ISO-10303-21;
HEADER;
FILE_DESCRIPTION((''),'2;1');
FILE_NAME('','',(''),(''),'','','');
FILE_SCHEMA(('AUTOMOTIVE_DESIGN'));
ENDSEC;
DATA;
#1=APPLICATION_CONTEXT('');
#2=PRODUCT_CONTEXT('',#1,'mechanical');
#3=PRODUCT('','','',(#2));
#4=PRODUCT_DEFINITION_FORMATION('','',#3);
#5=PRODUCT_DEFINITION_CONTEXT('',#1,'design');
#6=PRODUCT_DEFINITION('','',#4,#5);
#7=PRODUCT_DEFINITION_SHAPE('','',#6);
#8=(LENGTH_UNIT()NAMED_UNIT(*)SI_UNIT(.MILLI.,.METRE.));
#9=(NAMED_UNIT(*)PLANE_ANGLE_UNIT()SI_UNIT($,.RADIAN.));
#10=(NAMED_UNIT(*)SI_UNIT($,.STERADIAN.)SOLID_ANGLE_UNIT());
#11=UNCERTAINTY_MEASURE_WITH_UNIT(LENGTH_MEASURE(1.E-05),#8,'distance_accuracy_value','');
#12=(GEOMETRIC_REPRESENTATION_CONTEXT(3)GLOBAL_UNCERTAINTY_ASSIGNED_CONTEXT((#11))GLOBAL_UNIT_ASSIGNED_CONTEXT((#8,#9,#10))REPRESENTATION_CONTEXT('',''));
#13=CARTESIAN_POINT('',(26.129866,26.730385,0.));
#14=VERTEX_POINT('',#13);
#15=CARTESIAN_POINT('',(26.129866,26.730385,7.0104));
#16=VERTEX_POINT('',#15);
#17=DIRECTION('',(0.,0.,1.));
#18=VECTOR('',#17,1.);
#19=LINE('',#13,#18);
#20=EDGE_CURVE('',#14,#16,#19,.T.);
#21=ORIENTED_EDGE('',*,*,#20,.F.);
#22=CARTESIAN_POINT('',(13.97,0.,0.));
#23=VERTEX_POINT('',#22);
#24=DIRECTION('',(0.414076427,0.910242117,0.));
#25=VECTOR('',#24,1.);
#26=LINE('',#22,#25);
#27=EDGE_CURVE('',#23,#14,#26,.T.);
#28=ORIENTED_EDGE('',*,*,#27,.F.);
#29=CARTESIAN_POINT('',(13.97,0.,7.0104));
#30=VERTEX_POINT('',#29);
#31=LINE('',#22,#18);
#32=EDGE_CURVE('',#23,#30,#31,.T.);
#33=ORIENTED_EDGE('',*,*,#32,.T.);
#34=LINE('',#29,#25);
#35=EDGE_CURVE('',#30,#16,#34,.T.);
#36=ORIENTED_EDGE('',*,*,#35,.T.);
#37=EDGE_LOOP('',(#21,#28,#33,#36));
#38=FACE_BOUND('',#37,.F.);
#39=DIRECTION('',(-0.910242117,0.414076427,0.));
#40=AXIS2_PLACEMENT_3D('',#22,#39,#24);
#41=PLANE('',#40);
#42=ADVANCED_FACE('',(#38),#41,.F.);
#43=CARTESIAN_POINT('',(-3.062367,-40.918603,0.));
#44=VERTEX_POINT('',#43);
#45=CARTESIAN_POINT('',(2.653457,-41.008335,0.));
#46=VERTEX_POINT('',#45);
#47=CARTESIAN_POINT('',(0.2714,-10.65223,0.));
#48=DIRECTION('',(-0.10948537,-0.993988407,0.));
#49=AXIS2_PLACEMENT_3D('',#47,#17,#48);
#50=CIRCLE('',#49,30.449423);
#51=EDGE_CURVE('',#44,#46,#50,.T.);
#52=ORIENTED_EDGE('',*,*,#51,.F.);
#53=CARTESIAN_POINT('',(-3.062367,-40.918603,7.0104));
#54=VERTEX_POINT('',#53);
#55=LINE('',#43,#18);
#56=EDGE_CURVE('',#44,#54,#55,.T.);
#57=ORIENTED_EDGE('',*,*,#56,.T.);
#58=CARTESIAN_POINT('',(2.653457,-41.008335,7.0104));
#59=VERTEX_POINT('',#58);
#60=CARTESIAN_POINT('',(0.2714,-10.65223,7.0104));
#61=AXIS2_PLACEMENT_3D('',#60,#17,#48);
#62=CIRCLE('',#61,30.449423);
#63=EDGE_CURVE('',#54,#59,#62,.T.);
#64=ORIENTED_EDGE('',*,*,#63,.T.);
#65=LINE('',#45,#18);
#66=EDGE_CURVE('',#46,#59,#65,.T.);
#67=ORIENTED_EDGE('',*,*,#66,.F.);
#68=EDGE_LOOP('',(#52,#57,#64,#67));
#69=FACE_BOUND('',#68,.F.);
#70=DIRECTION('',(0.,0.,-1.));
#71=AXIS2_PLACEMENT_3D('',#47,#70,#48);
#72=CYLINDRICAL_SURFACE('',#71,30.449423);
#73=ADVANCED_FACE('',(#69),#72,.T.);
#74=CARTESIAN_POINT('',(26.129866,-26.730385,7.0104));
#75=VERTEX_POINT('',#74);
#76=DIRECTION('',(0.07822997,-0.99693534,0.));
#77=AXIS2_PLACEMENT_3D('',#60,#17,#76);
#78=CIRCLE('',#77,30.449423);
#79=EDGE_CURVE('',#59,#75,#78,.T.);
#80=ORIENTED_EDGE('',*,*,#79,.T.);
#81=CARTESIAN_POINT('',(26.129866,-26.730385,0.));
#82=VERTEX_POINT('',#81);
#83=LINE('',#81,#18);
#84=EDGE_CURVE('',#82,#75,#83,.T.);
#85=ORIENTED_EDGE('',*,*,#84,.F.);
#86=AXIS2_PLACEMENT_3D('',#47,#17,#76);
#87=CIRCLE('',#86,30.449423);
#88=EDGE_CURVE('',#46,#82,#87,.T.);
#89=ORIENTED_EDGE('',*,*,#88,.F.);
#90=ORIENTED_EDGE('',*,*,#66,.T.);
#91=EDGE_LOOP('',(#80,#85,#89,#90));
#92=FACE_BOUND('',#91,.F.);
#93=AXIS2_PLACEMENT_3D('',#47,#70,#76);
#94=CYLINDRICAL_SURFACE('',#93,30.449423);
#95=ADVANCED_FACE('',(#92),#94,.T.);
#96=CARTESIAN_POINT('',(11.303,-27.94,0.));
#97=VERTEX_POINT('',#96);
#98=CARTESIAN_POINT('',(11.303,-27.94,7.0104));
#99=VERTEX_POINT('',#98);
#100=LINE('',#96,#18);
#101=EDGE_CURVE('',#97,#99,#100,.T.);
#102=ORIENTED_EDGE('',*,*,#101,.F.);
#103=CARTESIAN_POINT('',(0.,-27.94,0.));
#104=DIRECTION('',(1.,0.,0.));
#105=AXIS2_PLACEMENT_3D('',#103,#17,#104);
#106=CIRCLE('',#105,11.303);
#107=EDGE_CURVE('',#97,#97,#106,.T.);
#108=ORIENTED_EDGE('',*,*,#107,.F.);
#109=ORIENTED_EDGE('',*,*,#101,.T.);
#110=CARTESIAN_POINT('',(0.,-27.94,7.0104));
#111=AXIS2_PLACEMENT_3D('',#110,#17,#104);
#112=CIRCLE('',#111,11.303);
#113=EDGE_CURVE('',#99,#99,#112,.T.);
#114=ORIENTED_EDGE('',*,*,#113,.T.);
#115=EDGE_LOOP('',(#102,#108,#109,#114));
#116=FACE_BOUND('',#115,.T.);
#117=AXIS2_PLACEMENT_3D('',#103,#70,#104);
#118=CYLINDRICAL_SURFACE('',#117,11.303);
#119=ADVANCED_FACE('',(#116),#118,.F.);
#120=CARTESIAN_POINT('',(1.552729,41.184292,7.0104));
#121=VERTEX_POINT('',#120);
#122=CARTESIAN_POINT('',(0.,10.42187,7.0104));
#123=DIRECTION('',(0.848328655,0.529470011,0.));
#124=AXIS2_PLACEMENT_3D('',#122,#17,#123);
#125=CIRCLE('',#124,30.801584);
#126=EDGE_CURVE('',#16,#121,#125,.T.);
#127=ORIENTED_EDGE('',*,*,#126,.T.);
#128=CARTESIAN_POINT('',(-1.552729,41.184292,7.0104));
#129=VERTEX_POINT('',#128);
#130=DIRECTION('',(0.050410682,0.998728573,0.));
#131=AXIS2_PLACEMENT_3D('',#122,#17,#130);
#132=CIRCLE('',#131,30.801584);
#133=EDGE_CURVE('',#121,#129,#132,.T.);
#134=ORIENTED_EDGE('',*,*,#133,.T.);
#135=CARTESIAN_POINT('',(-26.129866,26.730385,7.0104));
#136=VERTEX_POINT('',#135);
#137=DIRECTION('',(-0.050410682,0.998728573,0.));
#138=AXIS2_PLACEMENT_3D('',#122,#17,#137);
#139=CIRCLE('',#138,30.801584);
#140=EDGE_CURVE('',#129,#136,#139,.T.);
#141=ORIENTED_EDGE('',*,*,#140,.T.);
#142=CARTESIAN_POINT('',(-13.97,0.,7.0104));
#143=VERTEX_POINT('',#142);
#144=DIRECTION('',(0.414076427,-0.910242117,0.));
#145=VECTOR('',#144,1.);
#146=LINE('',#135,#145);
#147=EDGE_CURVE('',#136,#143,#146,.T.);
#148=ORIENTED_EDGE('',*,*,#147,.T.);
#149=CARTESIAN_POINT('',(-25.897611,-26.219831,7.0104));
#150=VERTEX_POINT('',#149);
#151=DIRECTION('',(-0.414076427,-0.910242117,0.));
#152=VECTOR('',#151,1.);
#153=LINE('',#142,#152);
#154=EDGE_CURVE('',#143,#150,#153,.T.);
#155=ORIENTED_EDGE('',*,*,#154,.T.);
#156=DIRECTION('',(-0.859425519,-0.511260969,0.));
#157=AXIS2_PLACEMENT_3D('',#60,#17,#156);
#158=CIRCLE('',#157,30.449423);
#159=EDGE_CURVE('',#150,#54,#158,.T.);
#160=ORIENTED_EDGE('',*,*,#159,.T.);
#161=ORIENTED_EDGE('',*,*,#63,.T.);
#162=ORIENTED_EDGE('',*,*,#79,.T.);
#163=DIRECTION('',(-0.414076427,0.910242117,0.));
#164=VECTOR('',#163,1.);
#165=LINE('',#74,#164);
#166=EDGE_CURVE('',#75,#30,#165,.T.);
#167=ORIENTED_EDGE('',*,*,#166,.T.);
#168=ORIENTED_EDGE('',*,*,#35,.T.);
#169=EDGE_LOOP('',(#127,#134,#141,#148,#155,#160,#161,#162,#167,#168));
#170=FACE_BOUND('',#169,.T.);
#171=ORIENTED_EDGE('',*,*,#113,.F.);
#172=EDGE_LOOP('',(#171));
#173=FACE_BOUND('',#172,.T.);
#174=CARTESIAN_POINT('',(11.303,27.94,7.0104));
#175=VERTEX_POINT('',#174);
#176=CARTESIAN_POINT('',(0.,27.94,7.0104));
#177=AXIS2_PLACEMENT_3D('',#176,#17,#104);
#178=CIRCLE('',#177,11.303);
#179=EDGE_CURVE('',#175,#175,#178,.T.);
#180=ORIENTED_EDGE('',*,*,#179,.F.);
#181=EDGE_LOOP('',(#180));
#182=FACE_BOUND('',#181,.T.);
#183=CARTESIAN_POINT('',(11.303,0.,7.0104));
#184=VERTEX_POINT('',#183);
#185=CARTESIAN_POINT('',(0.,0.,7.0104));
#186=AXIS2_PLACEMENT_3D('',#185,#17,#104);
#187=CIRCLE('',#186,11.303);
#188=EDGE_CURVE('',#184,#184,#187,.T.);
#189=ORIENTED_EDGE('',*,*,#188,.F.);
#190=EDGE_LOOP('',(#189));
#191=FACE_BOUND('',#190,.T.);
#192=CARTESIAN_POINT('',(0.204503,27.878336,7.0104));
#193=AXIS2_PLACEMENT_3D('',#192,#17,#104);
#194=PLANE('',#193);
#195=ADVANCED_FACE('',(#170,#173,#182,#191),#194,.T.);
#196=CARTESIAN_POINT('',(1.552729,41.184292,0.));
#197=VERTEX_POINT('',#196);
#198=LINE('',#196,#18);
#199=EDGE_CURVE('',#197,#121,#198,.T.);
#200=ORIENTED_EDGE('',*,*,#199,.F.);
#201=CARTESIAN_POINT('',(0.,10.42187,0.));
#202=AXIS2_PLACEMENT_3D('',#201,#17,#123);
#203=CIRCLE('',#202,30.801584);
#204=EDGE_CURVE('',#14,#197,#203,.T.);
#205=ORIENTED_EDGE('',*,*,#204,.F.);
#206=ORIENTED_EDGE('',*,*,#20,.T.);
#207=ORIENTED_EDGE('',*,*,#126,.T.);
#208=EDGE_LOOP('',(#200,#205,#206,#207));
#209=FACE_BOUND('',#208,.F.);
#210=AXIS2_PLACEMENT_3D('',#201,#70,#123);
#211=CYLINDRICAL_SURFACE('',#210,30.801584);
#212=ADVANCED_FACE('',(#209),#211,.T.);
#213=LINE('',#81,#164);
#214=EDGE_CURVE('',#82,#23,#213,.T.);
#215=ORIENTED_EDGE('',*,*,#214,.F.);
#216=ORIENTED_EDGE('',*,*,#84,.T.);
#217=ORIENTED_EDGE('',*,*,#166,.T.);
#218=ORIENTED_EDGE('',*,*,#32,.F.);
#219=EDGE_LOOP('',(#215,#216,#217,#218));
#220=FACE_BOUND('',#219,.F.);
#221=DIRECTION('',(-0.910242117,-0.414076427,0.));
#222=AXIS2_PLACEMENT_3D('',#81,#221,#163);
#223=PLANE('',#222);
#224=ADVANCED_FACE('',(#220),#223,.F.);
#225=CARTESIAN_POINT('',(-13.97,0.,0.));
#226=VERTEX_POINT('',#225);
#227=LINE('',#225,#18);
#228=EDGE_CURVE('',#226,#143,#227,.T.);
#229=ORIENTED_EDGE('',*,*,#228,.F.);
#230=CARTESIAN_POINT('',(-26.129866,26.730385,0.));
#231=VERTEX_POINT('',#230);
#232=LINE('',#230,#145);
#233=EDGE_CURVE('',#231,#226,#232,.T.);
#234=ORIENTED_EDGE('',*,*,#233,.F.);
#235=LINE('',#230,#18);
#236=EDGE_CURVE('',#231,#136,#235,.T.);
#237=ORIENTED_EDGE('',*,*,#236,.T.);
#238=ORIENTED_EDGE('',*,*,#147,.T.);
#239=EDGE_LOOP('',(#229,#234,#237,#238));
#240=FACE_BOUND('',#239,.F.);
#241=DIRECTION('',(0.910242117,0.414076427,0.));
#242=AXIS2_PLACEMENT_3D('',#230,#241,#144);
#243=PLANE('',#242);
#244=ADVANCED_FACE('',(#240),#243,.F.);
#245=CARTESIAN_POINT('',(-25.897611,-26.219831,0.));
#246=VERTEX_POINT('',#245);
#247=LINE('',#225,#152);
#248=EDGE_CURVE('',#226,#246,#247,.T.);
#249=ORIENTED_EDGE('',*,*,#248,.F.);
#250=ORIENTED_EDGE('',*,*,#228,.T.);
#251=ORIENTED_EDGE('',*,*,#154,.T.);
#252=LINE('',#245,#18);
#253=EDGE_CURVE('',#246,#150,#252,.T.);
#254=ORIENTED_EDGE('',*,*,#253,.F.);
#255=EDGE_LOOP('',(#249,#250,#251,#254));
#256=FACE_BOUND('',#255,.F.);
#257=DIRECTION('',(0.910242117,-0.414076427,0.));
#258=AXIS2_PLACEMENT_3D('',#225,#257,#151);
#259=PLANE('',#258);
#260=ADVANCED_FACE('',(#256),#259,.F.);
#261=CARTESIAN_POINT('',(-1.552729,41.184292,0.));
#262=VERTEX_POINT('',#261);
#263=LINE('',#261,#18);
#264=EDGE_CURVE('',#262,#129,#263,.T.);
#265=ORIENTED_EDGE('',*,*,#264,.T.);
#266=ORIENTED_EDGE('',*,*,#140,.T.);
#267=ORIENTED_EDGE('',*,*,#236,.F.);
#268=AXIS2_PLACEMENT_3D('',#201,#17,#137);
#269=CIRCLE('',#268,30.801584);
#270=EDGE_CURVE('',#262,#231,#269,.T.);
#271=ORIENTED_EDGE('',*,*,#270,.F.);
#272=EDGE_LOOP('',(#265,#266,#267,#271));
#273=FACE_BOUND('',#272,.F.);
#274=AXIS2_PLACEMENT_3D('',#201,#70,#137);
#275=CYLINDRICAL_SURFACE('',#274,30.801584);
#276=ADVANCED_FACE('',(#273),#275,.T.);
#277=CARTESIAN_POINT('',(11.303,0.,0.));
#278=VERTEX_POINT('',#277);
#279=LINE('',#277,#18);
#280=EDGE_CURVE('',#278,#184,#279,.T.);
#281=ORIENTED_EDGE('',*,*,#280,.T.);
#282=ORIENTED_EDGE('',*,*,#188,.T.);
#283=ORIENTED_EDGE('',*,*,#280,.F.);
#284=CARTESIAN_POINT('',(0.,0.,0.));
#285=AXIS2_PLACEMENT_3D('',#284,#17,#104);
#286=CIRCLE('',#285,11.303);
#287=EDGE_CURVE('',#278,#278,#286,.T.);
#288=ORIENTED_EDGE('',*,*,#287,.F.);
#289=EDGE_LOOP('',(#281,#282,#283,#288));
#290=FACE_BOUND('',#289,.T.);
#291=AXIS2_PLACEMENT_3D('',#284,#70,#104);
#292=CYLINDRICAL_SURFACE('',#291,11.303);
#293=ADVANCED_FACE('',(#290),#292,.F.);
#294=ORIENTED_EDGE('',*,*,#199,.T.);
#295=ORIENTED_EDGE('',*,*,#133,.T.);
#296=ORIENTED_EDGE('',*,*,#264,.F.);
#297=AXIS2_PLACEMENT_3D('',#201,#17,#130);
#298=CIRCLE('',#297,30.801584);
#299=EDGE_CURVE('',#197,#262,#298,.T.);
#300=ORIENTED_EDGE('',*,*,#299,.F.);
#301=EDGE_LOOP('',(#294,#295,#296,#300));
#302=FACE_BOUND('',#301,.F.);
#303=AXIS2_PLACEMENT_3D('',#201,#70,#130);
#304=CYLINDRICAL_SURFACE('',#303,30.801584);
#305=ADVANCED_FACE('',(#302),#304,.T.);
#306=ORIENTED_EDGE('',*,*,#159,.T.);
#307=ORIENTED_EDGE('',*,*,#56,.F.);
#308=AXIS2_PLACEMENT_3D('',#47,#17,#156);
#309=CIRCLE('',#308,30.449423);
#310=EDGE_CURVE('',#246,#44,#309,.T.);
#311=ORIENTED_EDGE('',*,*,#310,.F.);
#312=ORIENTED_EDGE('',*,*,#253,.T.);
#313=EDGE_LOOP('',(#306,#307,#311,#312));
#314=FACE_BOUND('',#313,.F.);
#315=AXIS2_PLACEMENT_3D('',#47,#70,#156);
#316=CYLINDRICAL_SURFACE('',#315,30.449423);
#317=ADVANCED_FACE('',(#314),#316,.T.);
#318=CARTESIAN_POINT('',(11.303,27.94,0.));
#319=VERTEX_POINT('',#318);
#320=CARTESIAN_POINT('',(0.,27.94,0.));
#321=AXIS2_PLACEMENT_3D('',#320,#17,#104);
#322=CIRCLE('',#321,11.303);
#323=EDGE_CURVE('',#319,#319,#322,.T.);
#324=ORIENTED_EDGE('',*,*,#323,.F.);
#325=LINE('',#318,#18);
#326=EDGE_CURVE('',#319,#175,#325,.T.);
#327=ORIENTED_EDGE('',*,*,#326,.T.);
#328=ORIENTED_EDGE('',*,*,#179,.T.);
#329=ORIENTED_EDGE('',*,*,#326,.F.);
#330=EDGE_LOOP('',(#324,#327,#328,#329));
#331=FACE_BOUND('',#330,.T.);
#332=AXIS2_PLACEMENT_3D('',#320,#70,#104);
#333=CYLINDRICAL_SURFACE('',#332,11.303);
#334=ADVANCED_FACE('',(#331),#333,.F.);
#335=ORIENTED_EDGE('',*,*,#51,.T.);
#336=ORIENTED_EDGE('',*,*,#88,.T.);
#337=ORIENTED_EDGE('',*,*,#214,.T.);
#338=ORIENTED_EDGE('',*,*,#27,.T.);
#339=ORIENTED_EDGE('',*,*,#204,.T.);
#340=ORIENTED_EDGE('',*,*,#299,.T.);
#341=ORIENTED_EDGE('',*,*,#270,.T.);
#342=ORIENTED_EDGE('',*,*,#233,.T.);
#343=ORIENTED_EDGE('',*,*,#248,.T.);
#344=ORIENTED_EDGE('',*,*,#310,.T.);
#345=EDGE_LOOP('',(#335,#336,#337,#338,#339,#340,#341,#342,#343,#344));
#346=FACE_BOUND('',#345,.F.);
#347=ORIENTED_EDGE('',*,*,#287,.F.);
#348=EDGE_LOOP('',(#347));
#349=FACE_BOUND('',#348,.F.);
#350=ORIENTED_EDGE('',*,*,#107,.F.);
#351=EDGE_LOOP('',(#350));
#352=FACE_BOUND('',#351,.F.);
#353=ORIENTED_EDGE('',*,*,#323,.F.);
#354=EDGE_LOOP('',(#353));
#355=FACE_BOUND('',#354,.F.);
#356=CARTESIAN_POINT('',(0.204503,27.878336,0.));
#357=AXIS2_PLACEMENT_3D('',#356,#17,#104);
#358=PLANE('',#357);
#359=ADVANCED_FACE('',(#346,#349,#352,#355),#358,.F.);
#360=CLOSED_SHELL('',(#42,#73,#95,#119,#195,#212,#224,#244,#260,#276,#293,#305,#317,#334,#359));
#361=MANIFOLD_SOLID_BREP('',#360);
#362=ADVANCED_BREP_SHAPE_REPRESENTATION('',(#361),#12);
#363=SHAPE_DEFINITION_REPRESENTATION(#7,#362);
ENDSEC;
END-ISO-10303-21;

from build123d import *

# Parameters (mm, degrees)
F0_R     = 11.303
F1_DEPTH = 7.0104


# Not quite as in the source:
# - a feature names something its author has since deleted; it is built from what else it names


with BuildPart() as f1:
    # F0 (on Top) → F1 (new body)
    with BuildSketch(Plane.XY):
        with BuildLine():
            ThreePointArc((-8.4576062893, 17.6302414744), (0, 14.605), (8.4576062893, 17.6302414744))
            ThreePointArc((8.4576062893, 17.6302414744), (12.0541363205, 22.2373670497), (13.335, 27.94))
            ThreePointArc((13.335, 27.94), (9.9631286308, 36.8033116207), (1.552728851, 41.1842915294))
            ThreePointArc((1.552728851, 41.1842915294), (0, 41.2234534857), (-1.552728851, 41.1842915294))
            ThreePointArc((-1.552728851, 41.1842915294), (-12.7964847088, 31.6912936565), (-8.4576062893, 17.6302414744))
        make_face()
        with Locations((0, 27.94)):
            Circle(F0_R, mode=Mode.SUBTRACT)
        with BuildLine():
            ThreePointArc((-8.4410840797, 11.1314419353), (0, 13.97), (8.4410840797, 11.1314419353))
            ThreePointArc((8.4410840797, 11.1314419353), (7.023943937, 14.3844655708), (8.4576062893, 17.6302414744))
            ThreePointArc((8.4576062893, 17.6302414744), (0, 14.605), (-8.4576062893, 17.6302414744))
            ThreePointArc((-8.4576062893, 17.6302414744), (-7.1686601212, 14.3840976519), (-8.4410840797, 11.1314419353))
        make_face()
        with BuildLine():
            ThreePointArc((8.4410840797, -11.1314419353), (12.5116514616, -6.2144571527), (13.97, 0))
            ThreePointArc((13.97, 0), (12.5116514616, 6.2144571527), (8.4410840797, 11.1314419353))
            ThreePointArc((8.4410840797, 11.1314419353), (0, 13.97), (-8.4410840797, 11.1314419353))
            ThreePointArc((-8.4410840797, 11.1314419353), (-12.5116514616, 6.2144571527), (-13.97, 0))
            ThreePointArc((-13.97, 0), (-12.5116514616, -6.2144571527), (-8.4410840797, -11.1314419353))
            ThreePointArc((-8.4410840797, -11.1314419353), (0, -13.97), (8.4410840797, -11.1314419353))
        make_face()
        Circle(F0_R, mode=Mode.SUBTRACT)
        with BuildLine():
            ThreePointArc((8.4410840797, -17.616709606), (7.0831122532, -14.3740757706), (8.4410840797, -11.1314419353))
            ThreePointArc((8.4410840797, -11.1314419353), (0, -13.97), (-8.4410840797, -11.1314419353))
            ThreePointArc((-8.4410840797, -11.1314419353), (-7.1012049909, -14.3740757706), (-8.4410840797, -17.616709606))
            ThreePointArc((-8.4410840797, -17.616709606), (0, -14.605), (8.4410840797, -17.616709606))
        make_face()
        with BuildLine():
            ThreePointArc((13.335, -27.94), (12.0495659922, -22.2277163587), (8.4410840797, -17.616709606))
            ThreePointArc((8.4410840797, -17.616709606), (0, -14.605), (-8.4410840797, -17.616709606))
            ThreePointArc((-8.4410840797, -17.616709606), (-12.9933407259, -30.9392201953), (-3.0623665698, -40.9186030062))
            ThreePointArc((-3.0623665698, -40.9186030062), (-0.2065651455, -41.0979009929), (2.6534571531, -41.0083354004))
            ThreePointArc((2.6534571531, -41.0083354004), (10.3248747241, -36.3791461021), (13.335, -27.94))
        make_face()
        with Locations((0, -27.94)):
            Circle(F0_R, mode=Mode.SUBTRACT)
        with BuildLine():
            ThreePointArc((-13.97, 0), (-12.5116514616, 6.2144571527), (-8.4410840797, 11.1314419353))
            ThreePointArc((-8.4410840797, 11.1314419353), (-7.1686601212, 14.3840976519), (-8.4576062893, 17.6302414744))
            ThreePointArc((-8.4576062893, 17.6302414744), (-12.7964847088, 31.6912936565), (-1.552728851, 41.1842915294))
            ThreePointArc((-1.552728851, 41.1842915294), (-15.6144282797, 36.9723347017), (-26.1298660189, 26.7303846776))
            Line((-26.1298660189, 26.7303846776), (-13.97, 0))
        make_face()
        with BuildLine():
            ThreePointArc((8.4410840797, 11.1314419353), (12.5116514616, 6.2144571527), (13.97, 0))
            Line((13.97, 0), (26.1298660189, 26.7303846776))
            ThreePointArc((26.1298660189, 26.7303846776), (15.6144282797, 36.9723347017), (1.552728851, 41.1842915294))
            ThreePointArc((1.552728851, 41.1842915294), (9.9631286308, 36.8033116207), (13.335, 27.94))
            ThreePointArc((13.335, 27.94), (12.0541363205, 22.2373670497), (8.4576062893, 17.6302414744))
            ThreePointArc((8.4576062893, 17.6302414744), (7.023943937, 14.3844655708), (8.4410840797, 11.1314419353))
        make_face()
        with BuildLine():
            Line((26.1298660189, -26.7303846776), (13.97, 0))
            ThreePointArc((13.97, 0), (12.5116514616, -6.2144571527), (8.4410840797, -11.1314419353))
            ThreePointArc((8.4410840797, -11.1314419353), (7.0831122532, -14.3740757706), (8.4410840797, -17.616709606))
            ThreePointArc((8.4410840797, -17.616709606), (12.0495659922, -22.2277163587), (13.335, -27.94))
            ThreePointArc((13.335, -27.94), (10.3248747241, -36.3791461021), (2.6534571531, -41.0083354004))
            ThreePointArc((2.6534571531, -41.0083354004), (16.0937498742, -36.6680054018), (26.1298660189, -26.7303846776))
        make_face()
        with BuildLine():
            ThreePointArc((-8.4410840797, -17.616709606), (-7.1012049909, -14.3740757706), (-8.4410840797, -11.1314419353))
            ThreePointArc((-8.4410840797, -11.1314419353), (-12.5116514616, -6.2144571527), (-13.97, 0))
            Line((-13.97, 0), (-25.8976111474, -26.2198311856))
            ThreePointArc((-25.8976111474, -26.2198311856), (-16.209405425, -36.2559483923), (-3.0623665698, -40.9186030062))
            ThreePointArc((-3.0623665698, -40.9186030062), (-12.9933407259, -30.9392201953), (-8.4410840797, -17.616709606))
        make_face()
    extrude(amount=F1_DEPTH)


solid = f1.part
